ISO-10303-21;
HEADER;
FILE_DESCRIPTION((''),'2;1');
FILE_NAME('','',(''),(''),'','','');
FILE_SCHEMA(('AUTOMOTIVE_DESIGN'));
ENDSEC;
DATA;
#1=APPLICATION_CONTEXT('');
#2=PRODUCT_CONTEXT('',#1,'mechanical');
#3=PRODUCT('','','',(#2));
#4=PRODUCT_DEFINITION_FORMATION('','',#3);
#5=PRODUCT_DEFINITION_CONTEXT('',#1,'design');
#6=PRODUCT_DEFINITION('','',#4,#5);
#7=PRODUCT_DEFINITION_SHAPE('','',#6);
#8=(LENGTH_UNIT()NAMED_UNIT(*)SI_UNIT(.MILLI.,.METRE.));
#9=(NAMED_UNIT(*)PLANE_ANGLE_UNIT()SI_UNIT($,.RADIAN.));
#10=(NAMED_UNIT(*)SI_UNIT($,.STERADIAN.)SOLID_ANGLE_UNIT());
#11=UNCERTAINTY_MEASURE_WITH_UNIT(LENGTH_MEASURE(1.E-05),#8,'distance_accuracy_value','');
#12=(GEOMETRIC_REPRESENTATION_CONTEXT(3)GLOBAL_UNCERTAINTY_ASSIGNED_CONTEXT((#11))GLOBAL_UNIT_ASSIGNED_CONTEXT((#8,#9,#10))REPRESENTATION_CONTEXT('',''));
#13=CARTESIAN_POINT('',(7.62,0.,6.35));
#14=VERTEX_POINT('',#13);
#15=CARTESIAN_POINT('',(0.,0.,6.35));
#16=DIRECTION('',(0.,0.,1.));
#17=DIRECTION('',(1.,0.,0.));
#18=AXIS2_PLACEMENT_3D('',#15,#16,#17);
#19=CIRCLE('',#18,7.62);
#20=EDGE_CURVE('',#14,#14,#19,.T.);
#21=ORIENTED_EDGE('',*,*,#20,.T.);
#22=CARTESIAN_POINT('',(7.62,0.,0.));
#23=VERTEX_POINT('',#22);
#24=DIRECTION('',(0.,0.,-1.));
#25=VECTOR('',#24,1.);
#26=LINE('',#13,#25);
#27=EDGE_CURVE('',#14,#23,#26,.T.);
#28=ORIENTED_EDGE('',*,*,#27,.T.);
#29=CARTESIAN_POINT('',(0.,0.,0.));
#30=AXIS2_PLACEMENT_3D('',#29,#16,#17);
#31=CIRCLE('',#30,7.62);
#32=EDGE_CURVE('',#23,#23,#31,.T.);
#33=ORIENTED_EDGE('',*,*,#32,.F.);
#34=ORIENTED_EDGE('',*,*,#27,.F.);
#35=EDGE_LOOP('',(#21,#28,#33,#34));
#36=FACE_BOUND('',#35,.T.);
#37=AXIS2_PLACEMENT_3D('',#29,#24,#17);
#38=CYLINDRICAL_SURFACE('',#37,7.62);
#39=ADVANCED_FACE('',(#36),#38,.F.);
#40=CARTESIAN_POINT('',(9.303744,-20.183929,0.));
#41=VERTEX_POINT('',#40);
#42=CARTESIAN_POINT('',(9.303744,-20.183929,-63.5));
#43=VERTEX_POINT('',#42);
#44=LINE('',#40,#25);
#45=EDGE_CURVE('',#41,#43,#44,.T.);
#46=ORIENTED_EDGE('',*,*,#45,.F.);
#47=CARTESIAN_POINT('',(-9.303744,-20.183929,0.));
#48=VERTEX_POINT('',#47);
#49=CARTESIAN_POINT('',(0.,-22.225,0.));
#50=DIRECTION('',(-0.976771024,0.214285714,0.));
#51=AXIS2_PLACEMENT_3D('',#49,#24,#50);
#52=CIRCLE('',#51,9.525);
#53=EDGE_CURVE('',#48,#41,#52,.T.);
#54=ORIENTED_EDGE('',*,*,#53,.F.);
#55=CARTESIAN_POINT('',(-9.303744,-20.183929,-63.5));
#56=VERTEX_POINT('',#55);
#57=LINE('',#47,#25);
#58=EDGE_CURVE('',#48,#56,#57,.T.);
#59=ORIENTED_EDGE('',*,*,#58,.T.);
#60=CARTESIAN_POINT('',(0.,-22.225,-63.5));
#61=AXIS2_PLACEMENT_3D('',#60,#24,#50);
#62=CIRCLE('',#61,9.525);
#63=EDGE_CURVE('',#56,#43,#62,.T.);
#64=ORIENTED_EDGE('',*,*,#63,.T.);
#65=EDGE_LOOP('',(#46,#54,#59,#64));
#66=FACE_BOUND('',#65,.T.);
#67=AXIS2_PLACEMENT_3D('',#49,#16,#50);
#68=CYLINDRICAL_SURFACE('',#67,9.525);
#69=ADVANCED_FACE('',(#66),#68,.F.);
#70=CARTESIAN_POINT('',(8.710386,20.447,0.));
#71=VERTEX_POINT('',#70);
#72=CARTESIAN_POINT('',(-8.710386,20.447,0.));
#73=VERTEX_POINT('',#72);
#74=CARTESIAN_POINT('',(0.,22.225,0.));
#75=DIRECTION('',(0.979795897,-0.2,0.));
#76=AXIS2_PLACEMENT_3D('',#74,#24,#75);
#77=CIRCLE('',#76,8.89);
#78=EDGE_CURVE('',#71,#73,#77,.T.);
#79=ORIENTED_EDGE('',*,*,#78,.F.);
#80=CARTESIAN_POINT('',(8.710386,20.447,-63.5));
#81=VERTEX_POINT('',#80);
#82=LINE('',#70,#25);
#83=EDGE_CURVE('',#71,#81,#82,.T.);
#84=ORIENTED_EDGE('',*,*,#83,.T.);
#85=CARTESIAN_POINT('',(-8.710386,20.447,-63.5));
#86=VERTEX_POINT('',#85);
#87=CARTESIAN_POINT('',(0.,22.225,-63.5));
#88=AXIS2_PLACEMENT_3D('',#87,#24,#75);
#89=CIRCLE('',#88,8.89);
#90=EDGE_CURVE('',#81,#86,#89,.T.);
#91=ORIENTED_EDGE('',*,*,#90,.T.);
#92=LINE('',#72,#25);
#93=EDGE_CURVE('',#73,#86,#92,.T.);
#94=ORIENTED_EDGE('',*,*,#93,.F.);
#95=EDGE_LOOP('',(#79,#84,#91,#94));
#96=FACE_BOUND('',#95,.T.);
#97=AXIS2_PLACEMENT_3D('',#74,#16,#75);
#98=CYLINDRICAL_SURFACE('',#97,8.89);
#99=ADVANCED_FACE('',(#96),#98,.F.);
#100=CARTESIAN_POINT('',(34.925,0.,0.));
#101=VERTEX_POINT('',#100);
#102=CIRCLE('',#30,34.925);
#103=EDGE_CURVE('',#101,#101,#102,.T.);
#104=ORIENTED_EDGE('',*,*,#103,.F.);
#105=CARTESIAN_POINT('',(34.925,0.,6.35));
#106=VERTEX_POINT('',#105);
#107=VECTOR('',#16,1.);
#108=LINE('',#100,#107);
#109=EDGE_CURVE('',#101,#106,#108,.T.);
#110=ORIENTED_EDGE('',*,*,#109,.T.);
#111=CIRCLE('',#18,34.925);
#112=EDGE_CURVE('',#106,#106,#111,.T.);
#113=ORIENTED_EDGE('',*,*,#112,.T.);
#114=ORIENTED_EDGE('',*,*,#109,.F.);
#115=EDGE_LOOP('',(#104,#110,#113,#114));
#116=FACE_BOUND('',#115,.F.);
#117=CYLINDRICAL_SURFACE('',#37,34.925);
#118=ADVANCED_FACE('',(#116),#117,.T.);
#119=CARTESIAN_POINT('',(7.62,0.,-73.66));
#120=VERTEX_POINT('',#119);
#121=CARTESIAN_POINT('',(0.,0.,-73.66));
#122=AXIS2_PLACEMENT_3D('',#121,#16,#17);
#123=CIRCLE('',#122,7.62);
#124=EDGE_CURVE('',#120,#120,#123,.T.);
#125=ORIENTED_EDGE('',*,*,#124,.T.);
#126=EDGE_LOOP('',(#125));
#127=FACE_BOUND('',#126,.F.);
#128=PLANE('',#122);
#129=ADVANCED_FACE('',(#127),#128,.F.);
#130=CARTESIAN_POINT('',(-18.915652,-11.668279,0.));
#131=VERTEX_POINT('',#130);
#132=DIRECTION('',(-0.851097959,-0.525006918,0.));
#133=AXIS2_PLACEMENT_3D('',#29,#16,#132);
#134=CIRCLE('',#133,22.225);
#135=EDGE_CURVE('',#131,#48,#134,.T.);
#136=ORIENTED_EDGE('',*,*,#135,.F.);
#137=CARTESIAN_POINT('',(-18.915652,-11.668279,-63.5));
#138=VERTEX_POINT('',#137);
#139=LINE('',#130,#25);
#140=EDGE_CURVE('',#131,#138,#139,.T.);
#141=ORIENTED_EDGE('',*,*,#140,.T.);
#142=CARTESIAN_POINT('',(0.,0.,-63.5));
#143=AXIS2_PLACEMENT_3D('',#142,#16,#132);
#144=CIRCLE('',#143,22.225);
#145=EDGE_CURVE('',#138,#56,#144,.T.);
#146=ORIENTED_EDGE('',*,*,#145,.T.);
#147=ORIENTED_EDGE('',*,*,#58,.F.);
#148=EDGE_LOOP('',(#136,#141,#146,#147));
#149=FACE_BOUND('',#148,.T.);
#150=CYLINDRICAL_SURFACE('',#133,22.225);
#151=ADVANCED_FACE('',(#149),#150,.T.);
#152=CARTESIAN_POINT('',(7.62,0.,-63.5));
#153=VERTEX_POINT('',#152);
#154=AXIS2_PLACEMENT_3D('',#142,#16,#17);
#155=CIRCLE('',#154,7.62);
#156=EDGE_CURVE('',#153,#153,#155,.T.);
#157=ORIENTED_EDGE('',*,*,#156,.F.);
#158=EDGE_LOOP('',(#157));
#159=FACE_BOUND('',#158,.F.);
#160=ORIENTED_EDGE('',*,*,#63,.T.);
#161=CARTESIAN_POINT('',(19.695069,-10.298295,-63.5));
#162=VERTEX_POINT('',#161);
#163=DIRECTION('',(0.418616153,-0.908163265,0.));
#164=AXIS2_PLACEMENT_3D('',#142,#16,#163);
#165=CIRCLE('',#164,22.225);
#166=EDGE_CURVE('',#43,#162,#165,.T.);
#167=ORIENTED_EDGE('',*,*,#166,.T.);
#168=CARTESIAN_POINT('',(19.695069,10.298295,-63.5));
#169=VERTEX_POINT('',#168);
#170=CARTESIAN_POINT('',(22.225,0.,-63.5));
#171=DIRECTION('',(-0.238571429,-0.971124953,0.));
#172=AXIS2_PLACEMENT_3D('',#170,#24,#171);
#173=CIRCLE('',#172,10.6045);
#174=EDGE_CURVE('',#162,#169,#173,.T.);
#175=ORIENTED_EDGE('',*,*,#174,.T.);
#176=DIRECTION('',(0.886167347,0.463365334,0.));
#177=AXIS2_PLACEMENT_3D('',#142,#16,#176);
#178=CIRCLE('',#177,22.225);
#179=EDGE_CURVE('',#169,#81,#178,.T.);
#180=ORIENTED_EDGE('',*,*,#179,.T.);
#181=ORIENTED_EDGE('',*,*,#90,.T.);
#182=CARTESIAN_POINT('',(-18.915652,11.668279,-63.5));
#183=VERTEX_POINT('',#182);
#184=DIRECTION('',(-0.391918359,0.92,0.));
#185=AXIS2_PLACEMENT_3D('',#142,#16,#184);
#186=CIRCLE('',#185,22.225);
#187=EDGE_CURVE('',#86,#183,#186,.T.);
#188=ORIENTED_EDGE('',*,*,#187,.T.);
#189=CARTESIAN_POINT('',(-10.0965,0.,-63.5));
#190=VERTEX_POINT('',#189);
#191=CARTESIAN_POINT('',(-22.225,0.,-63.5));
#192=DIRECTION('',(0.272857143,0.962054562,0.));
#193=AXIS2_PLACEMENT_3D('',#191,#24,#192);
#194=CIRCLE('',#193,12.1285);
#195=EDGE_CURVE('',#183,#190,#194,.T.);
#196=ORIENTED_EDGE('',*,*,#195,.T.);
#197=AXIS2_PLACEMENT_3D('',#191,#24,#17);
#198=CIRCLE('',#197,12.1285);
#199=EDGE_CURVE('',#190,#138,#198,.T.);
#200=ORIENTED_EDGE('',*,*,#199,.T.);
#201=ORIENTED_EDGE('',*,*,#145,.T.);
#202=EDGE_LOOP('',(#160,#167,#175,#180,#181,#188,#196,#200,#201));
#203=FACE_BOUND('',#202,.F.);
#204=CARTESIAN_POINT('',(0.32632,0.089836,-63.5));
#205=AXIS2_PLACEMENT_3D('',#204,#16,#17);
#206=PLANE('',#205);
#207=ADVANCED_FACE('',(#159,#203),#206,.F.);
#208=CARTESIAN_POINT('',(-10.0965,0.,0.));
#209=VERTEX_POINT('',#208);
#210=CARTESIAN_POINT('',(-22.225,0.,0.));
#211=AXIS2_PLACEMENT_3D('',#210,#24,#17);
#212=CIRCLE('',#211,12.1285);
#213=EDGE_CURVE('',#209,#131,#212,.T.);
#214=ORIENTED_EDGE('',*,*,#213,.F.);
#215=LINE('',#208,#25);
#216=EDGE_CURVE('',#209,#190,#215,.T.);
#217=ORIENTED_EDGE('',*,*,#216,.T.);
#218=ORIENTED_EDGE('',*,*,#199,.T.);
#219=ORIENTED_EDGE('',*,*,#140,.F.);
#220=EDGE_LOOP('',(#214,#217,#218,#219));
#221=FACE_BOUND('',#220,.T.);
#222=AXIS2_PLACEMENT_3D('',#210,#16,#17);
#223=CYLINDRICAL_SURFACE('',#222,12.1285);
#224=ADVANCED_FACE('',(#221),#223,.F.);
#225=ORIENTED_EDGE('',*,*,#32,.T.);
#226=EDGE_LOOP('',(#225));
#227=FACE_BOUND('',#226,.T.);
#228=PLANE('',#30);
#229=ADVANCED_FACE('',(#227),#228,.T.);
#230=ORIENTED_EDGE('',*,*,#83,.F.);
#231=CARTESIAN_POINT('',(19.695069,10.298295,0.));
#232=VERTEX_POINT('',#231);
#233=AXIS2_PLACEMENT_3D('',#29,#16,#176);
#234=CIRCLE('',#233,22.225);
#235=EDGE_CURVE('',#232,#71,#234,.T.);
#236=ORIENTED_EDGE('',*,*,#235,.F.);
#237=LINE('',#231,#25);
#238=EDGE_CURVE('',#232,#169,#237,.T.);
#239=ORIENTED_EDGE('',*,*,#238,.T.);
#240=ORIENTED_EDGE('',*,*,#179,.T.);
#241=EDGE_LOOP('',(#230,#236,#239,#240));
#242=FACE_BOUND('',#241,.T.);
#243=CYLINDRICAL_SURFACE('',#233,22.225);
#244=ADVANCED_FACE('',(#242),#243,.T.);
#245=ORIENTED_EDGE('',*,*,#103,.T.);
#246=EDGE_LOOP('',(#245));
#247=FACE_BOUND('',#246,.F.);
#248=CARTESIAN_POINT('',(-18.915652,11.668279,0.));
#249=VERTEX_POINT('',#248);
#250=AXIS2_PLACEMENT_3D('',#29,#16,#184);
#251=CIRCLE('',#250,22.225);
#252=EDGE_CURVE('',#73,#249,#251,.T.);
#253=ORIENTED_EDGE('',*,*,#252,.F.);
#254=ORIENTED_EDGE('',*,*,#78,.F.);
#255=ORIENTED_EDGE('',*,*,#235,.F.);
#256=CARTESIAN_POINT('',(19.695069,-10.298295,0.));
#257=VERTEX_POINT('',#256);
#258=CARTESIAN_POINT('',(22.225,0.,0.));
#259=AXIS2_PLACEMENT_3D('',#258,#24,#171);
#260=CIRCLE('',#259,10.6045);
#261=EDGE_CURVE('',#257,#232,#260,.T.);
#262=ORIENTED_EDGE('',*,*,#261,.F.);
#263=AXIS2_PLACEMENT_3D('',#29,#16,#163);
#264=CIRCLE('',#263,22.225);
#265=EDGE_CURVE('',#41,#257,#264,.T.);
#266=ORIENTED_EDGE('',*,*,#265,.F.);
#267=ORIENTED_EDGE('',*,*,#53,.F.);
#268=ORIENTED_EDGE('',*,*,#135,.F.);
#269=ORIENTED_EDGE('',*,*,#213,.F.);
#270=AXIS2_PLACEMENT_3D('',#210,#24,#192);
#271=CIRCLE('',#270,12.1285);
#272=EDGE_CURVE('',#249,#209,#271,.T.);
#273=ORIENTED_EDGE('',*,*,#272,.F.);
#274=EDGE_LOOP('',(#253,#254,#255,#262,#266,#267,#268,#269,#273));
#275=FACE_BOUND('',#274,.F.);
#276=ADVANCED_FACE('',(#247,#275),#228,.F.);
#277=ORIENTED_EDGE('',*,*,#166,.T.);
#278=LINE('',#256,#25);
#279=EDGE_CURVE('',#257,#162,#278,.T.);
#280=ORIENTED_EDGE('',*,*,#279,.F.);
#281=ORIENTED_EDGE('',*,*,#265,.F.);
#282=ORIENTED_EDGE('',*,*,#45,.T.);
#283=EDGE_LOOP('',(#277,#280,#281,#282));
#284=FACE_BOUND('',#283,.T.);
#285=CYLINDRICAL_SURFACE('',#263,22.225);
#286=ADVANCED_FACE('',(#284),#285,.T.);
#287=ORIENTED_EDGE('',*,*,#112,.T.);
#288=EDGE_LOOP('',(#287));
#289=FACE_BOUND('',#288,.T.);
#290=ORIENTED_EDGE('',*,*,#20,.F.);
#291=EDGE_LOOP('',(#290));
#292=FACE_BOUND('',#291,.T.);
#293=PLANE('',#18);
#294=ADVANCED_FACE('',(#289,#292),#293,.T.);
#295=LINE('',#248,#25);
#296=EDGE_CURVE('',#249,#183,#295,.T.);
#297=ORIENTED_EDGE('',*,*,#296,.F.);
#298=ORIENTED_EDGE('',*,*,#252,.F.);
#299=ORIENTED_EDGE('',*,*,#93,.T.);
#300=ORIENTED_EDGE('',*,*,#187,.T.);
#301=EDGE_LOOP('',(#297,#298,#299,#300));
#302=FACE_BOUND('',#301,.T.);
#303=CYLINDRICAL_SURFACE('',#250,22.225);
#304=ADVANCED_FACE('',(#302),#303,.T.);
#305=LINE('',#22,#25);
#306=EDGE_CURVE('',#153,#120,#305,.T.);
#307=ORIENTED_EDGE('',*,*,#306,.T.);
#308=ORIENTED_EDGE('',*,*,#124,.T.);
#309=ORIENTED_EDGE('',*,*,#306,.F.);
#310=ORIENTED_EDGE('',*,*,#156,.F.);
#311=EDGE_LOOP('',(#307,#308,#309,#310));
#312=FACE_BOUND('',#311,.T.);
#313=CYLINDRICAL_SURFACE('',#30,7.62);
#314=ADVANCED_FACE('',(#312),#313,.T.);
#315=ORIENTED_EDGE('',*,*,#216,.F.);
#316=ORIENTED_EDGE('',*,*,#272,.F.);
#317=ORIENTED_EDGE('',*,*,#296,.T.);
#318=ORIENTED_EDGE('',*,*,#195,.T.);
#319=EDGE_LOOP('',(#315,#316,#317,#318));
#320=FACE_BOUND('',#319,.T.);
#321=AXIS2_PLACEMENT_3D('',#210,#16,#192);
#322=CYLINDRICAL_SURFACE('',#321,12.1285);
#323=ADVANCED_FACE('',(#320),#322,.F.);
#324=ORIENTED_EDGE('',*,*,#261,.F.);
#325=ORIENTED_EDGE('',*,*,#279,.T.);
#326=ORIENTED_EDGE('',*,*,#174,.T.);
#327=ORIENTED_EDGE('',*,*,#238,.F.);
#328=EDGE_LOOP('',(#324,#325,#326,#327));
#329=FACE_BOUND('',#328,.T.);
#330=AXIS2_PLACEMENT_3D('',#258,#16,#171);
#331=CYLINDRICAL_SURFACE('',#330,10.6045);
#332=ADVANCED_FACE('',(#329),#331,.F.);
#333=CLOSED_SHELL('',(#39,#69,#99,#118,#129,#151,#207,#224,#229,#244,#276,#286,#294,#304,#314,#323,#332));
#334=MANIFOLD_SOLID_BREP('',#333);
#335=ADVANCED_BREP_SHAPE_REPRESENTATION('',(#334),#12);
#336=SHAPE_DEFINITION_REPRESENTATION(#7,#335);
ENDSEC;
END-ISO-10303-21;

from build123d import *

# Parameters (mm, degrees)
F0_R     = 7.62
F1_DEPTH = 63.5
F0_R_2   = 34.925
F3_DEPTH = 6.35
F4_DEPTH = 73.66


# Not quite as in the source:
# - the program builds the solid bodies; features that only make, move or delete a surface that nothing else refers to are left out


with BuildPart() as f1:
    # F0 (on Top) → F1 (new body)
    with BuildSketch(Plane.XY):
        with BuildLine():
            ThreePointArc((19.6950692857, -10.2982945593), (11.6205, 0), (19.6950692857, 10.2982945593))
            ThreePointArc((19.6950692857, 10.2982945593), (15.0819932796, 16.3243408355), (8.7103855253, 20.447))
            ThreePointArc((8.7103855253, 20.447), (0, 13.335), (-8.7103855253, 20.447))
            ThreePointArc((-8.7103855253, 20.447), (-14.4936529558, 16.8488767874), (-18.9156521429, 11.668278751))
            ThreePointArc((-18.9156521429, 11.668278751), (-12.549310419, 7.3131076419), (-10.0965, 0))
            ThreePointArc((-10.0965, 0), (-12.549310419, -7.3131076419), (-18.9156521429, -11.668278751))
            ThreePointArc((-18.9156521429, -11.668278751), (-14.738135996, -16.6354432572), (-9.3037440003, -20.1839285714))
            ThreePointArc((-9.3037440003, -20.1839285714), (0, -12.7), (9.3037440003, -20.1839285714))
            ThreePointArc((9.3037440003, -20.1839285714), (15.3187542886, -16.102372249), (19.6950692857, -10.2982945593))
        make_face()
        Circle(F0_R, mode=Mode.SUBTRACT)
    extrude(amount=-F1_DEPTH)

    # F0 (on Top) → F3 (join)
    with BuildSketch(Plane.XY):
        Circle(F0_R_2)
        with BuildLine():
            ThreePointArc((8.7103855253, 20.447), (15.0819932796, 16.3243408355), (19.6950692857, 10.2982945593))
            ThreePointArc((19.6950692857, 10.2982945593), (28.7681937917, 8.3451803608), (32.8295, 0))
            ThreePointArc((32.8295, 0), (28.7681937917, -8.3451803608), (19.6950692857, -10.2982945593))
            ThreePointArc((19.6950692857, -10.2982945593), (15.3187542886, -16.102372249), (9.3037440003, -20.1839285714))
            ThreePointArc((9.3037440003, -20.1839285714), (9.4695244496, -21.198485656), (9.525, -22.225))
            ThreePointArc((9.525, -22.225), (-1.026514344, -31.6945244496), (-9.3037440003, -20.1839285714))
            ThreePointArc((-9.3037440003, -20.1839285714), (-14.738135996, -16.6354432572), (-18.9156521429, -11.668278751))
            ThreePointArc((-18.9156521429, -11.668278751), (-34.3535, 0), (-18.9156521429, 11.668278751))
            ThreePointArc((-18.9156521429, 11.668278751), (-14.4936529558, 16.8488767874), (-8.7103855253, 20.447))
            ThreePointArc((-8.7103855253, 20.447), (-0.8935246722, 31.0699824002), (8.89, 22.225))
            ThreePointArc((8.89, 22.225), (8.8449824002, 21.3314753278), (8.7103855253, 20.447))
        make_face(mode=Mode.SUBTRACT)
        with BuildLine():
            ThreePointArc((19.6950692857, -10.2982945593), (11.6205, 0), (19.6950692857, 10.2982945593))
            ThreePointArc((19.6950692857, 10.2982945593), (15.0819932796, 16.3243408355), (8.7103855253, 20.447))
            ThreePointArc((8.7103855253, 20.447), (0, 13.335), (-8.7103855253, 20.447))
            ThreePointArc((-8.7103855253, 20.447), (-14.4936529558, 16.8488767874), (-18.9156521429, 11.668278751))
            ThreePointArc((-18.9156521429, 11.668278751), (-12.549310419, 7.3131076419), (-10.0965, 0))
            ThreePointArc((-10.0965, 0), (-12.549310419, -7.3131076419), (-18.9156521429, -11.668278751))
            ThreePointArc((-18.9156521429, -11.668278751), (-14.738135996, -16.6354432572), (-9.3037440003, -20.1839285714))
            ThreePointArc((-9.3037440003, -20.1839285714), (0, -12.7), (9.3037440003, -20.1839285714))
            ThreePointArc((9.3037440003, -20.1839285714), (15.3187542886, -16.102372249), (19.6950692857, -10.2982945593))
        make_face()
        Circle(F0_R, mode=Mode.SUBTRACT)
        with BuildLine():
            ThreePointArc((-8.7103855253, 20.447), (0, 13.335), (8.7103855253, 20.447))
            ThreePointArc((8.7103855253, 20.447), (0, 22.225), (-8.7103855253, 20.447))
        make_face()
        with BuildLine():
            ThreePointArc((-8.7103855253, 20.447), (0, 22.225), (8.7103855253, 20.447))
            ThreePointArc((8.7103855253, 20.447), (8.8449824002, 21.3314753278), (8.89, 22.225))
            ThreePointArc((8.89, 22.225), (-0.8935246722, 31.0699824002), (-8.7103855253, 20.447))
        make_face()
        with BuildLine():
            ThreePointArc((19.6950692857, -10.2982945593), (21.5832520705, -5.30225), (22.225, 0))
            ThreePointArc((22.225, 0), (21.5832520705, 5.30225), (19.6950692857, 10.2982945593))
            ThreePointArc((19.6950692857, 10.2982945593), (11.6205, 0), (19.6950692857, -10.2982945593))
        make_face()
        with BuildLine():
            ThreePointArc((19.6950692857, 10.2982945593), (21.5832520705, 5.30225), (22.225, 0))
            ThreePointArc((22.225, 0), (21.5832520705, -5.30225), (19.6950692857, -10.2982945593))
            ThreePointArc((19.6950692857, -10.2982945593), (28.7681937917, -8.3451803608), (32.8295, 0))
            ThreePointArc((32.8295, 0), (28.7681937917, 8.3451803608), (19.6950692857, 10.2982945593))
        make_face()
        with BuildLine():
            ThreePointArc((-18.9156521429, -11.668278751), (-22.225, 0), (-18.9156521429, 11.668278751))
            ThreePointArc((-18.9156521429, 11.668278751), (-34.3535, 0), (-18.9156521429, -11.668278751))
        make_face()
        with BuildLine():
            ThreePointArc((-10.0965, 0), (-12.549310419, 7.3131076419), (-18.9156521429, 11.668278751))
            ThreePointArc((-18.9156521429, 11.668278751), (-22.225, 0), (-18.9156521429, -11.668278751))
            ThreePointArc((-18.9156521429, -11.668278751), (-12.549310419, -7.3131076419), (-10.0965, 0))
        make_face()
        with BuildLine():
            ThreePointArc((9.525, -22.225), (9.4695244496, -21.198485656), (9.3037440003, -20.1839285714))
            ThreePointArc((9.3037440003, -20.1839285714), (0, -22.225), (-9.3037440003, -20.1839285714))
            ThreePointArc((-9.3037440003, -20.1839285714), (-1.026514344, -31.6945244496), (9.525, -22.225))
        make_face()
        with BuildLine():
            ThreePointArc((-9.3037440003, -20.1839285714), (0, -22.225), (9.3037440003, -20.1839285714))
            ThreePointArc((9.3037440003, -20.1839285714), (0, -12.7), (-9.3037440003, -20.1839285714))
        make_face()
    extrude(amount=F3_DEPTH)

    # F0 (on Top) → F4 (join)
    with BuildSketch(Plane.XY):
        Circle(F0_R)
    extrude(amount=-F4_DEPTH)


solid = f1.part
